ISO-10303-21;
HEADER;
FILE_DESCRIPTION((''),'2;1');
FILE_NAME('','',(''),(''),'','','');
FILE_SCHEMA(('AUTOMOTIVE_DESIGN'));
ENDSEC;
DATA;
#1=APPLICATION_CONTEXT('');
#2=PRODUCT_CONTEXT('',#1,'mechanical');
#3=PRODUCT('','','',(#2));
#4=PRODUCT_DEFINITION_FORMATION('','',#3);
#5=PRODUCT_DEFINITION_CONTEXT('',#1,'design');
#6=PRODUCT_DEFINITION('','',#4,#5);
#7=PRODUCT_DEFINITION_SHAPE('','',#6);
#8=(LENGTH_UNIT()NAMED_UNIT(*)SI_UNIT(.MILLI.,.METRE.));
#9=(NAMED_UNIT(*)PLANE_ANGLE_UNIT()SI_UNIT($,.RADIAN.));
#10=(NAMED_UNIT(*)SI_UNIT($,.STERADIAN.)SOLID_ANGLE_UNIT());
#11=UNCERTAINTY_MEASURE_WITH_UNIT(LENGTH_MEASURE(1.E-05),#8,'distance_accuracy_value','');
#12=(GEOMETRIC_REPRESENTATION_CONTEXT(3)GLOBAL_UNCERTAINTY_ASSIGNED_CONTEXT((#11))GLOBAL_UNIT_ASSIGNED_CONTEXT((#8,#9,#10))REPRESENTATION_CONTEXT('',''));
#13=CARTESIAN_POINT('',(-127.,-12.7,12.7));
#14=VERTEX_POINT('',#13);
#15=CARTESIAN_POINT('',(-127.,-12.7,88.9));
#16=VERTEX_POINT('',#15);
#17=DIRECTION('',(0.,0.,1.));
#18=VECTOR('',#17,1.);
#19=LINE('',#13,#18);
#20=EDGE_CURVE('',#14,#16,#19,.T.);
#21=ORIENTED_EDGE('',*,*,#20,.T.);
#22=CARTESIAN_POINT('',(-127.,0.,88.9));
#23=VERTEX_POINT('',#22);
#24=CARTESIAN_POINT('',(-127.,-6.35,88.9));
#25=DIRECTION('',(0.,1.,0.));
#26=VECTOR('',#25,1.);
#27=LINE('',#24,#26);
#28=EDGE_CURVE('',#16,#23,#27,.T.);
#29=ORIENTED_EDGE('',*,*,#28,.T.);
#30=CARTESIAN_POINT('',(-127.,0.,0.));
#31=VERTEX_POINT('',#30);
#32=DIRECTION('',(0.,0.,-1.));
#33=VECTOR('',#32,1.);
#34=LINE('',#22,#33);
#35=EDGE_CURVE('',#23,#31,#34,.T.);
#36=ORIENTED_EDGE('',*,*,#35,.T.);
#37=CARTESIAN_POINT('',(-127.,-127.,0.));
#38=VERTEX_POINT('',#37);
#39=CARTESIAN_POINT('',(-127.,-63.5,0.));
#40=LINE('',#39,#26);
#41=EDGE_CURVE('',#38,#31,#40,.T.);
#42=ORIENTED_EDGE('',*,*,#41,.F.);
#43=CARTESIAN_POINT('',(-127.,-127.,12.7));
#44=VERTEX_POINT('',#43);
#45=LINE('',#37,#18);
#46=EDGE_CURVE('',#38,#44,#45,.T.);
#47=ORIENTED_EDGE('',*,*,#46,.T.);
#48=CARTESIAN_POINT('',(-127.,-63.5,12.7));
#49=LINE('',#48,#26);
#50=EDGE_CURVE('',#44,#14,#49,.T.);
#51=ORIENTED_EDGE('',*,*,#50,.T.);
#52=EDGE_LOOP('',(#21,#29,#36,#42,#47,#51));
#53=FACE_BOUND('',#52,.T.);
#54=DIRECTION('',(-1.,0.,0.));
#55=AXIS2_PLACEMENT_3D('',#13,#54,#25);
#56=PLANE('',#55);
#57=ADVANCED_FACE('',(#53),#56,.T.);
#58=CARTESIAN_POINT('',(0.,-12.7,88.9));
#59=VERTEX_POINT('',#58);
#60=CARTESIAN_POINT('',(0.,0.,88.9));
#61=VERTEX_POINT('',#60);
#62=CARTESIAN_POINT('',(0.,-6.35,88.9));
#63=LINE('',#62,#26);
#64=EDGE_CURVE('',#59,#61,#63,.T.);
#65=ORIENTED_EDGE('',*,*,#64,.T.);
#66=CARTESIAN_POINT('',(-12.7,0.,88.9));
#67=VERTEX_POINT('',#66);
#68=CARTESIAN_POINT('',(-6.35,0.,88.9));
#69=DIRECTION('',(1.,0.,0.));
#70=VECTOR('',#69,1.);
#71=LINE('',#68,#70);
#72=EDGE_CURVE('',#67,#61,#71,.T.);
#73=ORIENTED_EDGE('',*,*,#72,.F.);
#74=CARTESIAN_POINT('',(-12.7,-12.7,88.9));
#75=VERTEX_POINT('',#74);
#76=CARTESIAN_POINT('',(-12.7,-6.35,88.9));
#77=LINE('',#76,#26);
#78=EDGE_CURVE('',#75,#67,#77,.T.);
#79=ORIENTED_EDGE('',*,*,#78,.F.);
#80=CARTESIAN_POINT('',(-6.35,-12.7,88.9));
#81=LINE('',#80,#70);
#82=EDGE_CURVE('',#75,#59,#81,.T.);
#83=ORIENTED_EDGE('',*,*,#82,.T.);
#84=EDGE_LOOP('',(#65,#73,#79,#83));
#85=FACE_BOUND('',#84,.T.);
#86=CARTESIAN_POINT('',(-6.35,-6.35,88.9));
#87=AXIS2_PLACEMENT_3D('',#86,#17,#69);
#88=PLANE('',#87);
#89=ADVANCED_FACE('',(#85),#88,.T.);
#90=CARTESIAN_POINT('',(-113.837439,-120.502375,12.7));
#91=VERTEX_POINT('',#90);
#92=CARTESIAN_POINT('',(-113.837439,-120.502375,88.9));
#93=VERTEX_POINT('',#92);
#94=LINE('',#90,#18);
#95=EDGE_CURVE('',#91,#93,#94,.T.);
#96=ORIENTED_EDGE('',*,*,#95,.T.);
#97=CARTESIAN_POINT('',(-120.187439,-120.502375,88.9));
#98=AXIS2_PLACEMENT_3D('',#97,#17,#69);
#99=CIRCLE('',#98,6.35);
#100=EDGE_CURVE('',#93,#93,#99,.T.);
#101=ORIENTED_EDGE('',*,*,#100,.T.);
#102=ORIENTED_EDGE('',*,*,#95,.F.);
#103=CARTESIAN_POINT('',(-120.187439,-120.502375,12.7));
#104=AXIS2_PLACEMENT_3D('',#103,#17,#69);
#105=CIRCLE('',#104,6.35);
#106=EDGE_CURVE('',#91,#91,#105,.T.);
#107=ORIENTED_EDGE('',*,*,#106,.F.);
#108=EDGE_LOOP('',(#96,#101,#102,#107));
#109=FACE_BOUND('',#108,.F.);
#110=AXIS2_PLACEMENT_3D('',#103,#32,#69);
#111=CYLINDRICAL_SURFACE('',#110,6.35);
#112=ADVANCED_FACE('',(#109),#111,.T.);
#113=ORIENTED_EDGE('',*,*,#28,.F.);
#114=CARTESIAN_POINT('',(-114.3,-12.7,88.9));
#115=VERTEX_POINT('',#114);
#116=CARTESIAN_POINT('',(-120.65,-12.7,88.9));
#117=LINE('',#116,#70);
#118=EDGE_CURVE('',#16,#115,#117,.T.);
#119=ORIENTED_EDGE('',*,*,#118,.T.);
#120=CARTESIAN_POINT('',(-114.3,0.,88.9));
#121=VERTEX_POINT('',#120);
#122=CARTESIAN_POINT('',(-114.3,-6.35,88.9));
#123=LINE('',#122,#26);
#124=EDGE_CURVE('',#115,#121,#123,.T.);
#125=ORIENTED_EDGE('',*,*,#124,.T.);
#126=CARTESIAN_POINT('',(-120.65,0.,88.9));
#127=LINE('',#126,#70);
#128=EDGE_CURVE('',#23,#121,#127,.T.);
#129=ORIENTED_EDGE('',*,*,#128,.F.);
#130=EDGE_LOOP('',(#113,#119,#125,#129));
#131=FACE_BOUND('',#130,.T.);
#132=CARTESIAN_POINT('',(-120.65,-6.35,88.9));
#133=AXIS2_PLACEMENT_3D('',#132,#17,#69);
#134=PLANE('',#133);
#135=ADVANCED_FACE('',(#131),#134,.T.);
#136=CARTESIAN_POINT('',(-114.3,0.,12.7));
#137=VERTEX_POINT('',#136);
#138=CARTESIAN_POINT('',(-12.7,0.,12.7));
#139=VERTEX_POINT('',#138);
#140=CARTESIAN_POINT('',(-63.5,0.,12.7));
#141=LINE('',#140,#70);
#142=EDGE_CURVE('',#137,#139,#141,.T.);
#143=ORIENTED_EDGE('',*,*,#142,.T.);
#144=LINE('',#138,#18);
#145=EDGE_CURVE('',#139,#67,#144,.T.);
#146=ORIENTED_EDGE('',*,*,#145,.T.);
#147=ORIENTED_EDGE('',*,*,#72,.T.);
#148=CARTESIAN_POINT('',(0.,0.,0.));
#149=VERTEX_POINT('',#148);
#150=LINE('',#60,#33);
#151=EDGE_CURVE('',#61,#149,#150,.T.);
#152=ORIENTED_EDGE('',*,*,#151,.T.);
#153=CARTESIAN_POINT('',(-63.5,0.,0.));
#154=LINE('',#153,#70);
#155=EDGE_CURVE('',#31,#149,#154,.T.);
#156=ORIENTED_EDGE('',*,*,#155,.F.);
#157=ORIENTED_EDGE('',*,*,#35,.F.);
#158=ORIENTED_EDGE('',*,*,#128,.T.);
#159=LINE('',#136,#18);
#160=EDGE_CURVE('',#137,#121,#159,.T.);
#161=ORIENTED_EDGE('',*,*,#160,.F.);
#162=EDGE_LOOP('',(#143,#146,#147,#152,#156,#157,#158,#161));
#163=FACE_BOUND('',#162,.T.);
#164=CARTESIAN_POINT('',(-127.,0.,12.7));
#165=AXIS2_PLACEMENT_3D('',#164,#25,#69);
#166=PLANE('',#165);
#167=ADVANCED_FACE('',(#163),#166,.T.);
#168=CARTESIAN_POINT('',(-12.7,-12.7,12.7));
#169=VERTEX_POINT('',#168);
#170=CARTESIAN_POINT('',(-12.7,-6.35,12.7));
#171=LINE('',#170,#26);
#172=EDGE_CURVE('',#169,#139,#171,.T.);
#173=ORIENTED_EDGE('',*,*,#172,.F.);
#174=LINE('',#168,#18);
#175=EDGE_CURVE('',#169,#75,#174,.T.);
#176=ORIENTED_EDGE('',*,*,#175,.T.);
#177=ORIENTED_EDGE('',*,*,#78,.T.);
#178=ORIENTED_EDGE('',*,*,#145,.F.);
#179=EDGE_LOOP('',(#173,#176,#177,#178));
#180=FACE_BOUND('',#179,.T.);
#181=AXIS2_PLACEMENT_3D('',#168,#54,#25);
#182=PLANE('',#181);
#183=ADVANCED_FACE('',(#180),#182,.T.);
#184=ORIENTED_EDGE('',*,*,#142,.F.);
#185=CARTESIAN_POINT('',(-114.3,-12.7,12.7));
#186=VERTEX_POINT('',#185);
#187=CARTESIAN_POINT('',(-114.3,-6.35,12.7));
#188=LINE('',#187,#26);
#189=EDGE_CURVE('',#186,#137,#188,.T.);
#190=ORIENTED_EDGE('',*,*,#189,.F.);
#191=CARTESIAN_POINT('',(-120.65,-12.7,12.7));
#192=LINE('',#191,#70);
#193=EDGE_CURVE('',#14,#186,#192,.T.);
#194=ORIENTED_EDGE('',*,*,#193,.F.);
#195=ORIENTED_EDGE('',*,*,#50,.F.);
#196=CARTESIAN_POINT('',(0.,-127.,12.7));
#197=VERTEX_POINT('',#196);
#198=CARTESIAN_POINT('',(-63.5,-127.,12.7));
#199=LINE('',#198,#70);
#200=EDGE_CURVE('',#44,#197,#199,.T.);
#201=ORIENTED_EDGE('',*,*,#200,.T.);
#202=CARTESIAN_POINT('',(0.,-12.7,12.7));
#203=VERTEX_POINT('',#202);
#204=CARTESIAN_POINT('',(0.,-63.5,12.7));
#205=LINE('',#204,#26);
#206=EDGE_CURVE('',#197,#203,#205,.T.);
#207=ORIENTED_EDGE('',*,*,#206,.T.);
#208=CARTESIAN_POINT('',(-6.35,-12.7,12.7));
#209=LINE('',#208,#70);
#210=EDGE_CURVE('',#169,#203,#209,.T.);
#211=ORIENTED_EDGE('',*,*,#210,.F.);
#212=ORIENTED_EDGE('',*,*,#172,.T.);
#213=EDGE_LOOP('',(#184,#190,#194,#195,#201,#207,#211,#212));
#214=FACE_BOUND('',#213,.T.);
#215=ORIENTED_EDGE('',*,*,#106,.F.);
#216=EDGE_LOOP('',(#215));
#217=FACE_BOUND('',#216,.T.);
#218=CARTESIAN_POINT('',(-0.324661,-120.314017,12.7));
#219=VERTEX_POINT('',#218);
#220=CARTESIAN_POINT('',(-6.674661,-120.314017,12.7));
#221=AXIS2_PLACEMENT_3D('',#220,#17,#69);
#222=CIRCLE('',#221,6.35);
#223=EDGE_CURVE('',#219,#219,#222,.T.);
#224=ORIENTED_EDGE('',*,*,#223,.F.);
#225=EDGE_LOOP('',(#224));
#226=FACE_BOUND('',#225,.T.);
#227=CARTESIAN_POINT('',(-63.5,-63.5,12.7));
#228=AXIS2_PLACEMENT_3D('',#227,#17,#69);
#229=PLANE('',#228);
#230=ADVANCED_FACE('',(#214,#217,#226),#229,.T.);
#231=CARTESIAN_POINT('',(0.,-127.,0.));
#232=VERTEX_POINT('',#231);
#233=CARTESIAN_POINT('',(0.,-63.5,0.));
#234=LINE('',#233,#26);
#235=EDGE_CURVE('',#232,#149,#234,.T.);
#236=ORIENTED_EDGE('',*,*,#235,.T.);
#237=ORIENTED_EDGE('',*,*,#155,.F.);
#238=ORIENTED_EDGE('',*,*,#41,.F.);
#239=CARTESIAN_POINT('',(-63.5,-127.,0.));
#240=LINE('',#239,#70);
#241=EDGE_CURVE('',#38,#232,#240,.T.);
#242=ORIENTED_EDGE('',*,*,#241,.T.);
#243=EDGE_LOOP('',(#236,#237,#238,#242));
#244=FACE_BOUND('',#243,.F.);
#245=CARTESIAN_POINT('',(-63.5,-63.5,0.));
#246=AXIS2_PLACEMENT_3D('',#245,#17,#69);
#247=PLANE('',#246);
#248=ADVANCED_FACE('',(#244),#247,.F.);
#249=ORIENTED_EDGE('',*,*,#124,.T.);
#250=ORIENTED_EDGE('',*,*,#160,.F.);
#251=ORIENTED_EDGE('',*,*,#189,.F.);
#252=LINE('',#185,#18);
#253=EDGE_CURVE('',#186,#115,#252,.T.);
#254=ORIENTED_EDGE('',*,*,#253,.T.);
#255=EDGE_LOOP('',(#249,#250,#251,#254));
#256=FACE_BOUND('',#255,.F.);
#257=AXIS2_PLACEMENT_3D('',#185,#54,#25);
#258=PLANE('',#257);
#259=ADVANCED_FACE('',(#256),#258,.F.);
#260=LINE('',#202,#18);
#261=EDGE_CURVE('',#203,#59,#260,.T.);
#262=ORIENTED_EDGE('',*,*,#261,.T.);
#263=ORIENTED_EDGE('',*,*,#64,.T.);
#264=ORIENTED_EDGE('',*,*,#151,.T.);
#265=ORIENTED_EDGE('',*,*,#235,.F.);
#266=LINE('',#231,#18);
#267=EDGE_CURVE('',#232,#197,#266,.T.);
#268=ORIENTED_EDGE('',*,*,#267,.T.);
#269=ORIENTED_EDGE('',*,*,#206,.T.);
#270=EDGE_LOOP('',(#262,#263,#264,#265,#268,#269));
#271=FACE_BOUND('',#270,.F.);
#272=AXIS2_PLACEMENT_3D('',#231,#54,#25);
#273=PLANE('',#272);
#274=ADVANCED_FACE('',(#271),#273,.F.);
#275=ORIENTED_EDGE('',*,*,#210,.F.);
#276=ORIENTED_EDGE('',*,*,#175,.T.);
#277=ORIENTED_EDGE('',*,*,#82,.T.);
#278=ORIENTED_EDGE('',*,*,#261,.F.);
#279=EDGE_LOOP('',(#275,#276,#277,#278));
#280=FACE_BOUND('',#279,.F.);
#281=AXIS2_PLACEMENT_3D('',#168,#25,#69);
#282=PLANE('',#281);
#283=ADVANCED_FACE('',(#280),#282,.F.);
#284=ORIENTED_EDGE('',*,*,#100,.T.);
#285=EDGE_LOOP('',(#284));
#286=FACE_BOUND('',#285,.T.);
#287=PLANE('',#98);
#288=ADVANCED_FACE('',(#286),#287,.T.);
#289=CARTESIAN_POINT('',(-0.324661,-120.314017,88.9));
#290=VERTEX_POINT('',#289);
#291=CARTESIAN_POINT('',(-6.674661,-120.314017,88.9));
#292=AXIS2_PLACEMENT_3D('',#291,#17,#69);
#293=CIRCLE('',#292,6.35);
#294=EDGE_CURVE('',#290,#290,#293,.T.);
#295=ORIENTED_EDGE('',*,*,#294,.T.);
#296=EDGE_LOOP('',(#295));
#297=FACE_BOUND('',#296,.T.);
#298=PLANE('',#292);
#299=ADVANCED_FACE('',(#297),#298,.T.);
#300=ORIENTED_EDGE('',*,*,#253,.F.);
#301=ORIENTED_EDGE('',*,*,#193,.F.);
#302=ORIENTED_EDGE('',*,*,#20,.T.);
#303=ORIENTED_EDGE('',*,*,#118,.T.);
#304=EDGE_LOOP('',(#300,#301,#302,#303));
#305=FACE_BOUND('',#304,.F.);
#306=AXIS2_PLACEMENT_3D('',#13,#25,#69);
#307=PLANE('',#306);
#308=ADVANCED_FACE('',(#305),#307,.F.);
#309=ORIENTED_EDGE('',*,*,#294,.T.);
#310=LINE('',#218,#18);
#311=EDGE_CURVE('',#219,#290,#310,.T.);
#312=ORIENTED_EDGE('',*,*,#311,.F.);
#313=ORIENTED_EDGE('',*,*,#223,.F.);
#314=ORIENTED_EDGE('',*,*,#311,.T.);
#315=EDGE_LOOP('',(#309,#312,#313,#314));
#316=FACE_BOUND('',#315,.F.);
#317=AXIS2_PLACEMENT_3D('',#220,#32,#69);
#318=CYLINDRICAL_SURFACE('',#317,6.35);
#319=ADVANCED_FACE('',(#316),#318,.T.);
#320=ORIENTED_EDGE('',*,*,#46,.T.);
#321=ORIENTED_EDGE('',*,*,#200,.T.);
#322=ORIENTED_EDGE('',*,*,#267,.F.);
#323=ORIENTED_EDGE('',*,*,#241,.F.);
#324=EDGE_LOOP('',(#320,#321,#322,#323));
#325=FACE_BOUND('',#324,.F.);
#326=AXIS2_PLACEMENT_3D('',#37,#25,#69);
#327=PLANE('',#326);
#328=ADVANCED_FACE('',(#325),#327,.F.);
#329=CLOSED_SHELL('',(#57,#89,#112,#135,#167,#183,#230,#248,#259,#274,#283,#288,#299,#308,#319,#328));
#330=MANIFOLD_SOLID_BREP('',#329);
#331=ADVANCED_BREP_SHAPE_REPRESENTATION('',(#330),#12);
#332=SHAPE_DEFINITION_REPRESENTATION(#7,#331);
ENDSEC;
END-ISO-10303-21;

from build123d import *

# Parameters (mm, degrees)
F0_W     = 127
F0_H     = 127
F1_DEPTH = 12.7
F2_W     = 12.7
F2_H     = 12.7
F2_R     = 6.35
F3_DEPTH = 76.2


# Not quite as in the source:
# - a feature names something its author has since deleted; it is built from what else it names


with BuildPart() as f1:
    # F0 (on Top) → F1 (new body)
    with BuildSketch(Plane.XY):
        with Locations((-63.5, -63.5)):
            Rectangle(F0_W, F0_H)
    extrude(amount=F1_DEPTH)

    # F2 (on face) → F3 (join)
    with BuildSketch(Plane.XY.offset(12.7)):
        with Locations((-120.65, -6.35)):
            Rectangle(F2_W, F2_H)
        with Locations((-6.35, -6.35)):
            Rectangle(F2_W, F2_H)
        with Locations((-120.1874390244, -120.5023750663)):
            Circle(F2_R)
        with Locations((-6.6746613011, -120.3140169382)):
            Circle(F2_R)
    extrude(amount=F3_DEPTH)


solid = f1.part
